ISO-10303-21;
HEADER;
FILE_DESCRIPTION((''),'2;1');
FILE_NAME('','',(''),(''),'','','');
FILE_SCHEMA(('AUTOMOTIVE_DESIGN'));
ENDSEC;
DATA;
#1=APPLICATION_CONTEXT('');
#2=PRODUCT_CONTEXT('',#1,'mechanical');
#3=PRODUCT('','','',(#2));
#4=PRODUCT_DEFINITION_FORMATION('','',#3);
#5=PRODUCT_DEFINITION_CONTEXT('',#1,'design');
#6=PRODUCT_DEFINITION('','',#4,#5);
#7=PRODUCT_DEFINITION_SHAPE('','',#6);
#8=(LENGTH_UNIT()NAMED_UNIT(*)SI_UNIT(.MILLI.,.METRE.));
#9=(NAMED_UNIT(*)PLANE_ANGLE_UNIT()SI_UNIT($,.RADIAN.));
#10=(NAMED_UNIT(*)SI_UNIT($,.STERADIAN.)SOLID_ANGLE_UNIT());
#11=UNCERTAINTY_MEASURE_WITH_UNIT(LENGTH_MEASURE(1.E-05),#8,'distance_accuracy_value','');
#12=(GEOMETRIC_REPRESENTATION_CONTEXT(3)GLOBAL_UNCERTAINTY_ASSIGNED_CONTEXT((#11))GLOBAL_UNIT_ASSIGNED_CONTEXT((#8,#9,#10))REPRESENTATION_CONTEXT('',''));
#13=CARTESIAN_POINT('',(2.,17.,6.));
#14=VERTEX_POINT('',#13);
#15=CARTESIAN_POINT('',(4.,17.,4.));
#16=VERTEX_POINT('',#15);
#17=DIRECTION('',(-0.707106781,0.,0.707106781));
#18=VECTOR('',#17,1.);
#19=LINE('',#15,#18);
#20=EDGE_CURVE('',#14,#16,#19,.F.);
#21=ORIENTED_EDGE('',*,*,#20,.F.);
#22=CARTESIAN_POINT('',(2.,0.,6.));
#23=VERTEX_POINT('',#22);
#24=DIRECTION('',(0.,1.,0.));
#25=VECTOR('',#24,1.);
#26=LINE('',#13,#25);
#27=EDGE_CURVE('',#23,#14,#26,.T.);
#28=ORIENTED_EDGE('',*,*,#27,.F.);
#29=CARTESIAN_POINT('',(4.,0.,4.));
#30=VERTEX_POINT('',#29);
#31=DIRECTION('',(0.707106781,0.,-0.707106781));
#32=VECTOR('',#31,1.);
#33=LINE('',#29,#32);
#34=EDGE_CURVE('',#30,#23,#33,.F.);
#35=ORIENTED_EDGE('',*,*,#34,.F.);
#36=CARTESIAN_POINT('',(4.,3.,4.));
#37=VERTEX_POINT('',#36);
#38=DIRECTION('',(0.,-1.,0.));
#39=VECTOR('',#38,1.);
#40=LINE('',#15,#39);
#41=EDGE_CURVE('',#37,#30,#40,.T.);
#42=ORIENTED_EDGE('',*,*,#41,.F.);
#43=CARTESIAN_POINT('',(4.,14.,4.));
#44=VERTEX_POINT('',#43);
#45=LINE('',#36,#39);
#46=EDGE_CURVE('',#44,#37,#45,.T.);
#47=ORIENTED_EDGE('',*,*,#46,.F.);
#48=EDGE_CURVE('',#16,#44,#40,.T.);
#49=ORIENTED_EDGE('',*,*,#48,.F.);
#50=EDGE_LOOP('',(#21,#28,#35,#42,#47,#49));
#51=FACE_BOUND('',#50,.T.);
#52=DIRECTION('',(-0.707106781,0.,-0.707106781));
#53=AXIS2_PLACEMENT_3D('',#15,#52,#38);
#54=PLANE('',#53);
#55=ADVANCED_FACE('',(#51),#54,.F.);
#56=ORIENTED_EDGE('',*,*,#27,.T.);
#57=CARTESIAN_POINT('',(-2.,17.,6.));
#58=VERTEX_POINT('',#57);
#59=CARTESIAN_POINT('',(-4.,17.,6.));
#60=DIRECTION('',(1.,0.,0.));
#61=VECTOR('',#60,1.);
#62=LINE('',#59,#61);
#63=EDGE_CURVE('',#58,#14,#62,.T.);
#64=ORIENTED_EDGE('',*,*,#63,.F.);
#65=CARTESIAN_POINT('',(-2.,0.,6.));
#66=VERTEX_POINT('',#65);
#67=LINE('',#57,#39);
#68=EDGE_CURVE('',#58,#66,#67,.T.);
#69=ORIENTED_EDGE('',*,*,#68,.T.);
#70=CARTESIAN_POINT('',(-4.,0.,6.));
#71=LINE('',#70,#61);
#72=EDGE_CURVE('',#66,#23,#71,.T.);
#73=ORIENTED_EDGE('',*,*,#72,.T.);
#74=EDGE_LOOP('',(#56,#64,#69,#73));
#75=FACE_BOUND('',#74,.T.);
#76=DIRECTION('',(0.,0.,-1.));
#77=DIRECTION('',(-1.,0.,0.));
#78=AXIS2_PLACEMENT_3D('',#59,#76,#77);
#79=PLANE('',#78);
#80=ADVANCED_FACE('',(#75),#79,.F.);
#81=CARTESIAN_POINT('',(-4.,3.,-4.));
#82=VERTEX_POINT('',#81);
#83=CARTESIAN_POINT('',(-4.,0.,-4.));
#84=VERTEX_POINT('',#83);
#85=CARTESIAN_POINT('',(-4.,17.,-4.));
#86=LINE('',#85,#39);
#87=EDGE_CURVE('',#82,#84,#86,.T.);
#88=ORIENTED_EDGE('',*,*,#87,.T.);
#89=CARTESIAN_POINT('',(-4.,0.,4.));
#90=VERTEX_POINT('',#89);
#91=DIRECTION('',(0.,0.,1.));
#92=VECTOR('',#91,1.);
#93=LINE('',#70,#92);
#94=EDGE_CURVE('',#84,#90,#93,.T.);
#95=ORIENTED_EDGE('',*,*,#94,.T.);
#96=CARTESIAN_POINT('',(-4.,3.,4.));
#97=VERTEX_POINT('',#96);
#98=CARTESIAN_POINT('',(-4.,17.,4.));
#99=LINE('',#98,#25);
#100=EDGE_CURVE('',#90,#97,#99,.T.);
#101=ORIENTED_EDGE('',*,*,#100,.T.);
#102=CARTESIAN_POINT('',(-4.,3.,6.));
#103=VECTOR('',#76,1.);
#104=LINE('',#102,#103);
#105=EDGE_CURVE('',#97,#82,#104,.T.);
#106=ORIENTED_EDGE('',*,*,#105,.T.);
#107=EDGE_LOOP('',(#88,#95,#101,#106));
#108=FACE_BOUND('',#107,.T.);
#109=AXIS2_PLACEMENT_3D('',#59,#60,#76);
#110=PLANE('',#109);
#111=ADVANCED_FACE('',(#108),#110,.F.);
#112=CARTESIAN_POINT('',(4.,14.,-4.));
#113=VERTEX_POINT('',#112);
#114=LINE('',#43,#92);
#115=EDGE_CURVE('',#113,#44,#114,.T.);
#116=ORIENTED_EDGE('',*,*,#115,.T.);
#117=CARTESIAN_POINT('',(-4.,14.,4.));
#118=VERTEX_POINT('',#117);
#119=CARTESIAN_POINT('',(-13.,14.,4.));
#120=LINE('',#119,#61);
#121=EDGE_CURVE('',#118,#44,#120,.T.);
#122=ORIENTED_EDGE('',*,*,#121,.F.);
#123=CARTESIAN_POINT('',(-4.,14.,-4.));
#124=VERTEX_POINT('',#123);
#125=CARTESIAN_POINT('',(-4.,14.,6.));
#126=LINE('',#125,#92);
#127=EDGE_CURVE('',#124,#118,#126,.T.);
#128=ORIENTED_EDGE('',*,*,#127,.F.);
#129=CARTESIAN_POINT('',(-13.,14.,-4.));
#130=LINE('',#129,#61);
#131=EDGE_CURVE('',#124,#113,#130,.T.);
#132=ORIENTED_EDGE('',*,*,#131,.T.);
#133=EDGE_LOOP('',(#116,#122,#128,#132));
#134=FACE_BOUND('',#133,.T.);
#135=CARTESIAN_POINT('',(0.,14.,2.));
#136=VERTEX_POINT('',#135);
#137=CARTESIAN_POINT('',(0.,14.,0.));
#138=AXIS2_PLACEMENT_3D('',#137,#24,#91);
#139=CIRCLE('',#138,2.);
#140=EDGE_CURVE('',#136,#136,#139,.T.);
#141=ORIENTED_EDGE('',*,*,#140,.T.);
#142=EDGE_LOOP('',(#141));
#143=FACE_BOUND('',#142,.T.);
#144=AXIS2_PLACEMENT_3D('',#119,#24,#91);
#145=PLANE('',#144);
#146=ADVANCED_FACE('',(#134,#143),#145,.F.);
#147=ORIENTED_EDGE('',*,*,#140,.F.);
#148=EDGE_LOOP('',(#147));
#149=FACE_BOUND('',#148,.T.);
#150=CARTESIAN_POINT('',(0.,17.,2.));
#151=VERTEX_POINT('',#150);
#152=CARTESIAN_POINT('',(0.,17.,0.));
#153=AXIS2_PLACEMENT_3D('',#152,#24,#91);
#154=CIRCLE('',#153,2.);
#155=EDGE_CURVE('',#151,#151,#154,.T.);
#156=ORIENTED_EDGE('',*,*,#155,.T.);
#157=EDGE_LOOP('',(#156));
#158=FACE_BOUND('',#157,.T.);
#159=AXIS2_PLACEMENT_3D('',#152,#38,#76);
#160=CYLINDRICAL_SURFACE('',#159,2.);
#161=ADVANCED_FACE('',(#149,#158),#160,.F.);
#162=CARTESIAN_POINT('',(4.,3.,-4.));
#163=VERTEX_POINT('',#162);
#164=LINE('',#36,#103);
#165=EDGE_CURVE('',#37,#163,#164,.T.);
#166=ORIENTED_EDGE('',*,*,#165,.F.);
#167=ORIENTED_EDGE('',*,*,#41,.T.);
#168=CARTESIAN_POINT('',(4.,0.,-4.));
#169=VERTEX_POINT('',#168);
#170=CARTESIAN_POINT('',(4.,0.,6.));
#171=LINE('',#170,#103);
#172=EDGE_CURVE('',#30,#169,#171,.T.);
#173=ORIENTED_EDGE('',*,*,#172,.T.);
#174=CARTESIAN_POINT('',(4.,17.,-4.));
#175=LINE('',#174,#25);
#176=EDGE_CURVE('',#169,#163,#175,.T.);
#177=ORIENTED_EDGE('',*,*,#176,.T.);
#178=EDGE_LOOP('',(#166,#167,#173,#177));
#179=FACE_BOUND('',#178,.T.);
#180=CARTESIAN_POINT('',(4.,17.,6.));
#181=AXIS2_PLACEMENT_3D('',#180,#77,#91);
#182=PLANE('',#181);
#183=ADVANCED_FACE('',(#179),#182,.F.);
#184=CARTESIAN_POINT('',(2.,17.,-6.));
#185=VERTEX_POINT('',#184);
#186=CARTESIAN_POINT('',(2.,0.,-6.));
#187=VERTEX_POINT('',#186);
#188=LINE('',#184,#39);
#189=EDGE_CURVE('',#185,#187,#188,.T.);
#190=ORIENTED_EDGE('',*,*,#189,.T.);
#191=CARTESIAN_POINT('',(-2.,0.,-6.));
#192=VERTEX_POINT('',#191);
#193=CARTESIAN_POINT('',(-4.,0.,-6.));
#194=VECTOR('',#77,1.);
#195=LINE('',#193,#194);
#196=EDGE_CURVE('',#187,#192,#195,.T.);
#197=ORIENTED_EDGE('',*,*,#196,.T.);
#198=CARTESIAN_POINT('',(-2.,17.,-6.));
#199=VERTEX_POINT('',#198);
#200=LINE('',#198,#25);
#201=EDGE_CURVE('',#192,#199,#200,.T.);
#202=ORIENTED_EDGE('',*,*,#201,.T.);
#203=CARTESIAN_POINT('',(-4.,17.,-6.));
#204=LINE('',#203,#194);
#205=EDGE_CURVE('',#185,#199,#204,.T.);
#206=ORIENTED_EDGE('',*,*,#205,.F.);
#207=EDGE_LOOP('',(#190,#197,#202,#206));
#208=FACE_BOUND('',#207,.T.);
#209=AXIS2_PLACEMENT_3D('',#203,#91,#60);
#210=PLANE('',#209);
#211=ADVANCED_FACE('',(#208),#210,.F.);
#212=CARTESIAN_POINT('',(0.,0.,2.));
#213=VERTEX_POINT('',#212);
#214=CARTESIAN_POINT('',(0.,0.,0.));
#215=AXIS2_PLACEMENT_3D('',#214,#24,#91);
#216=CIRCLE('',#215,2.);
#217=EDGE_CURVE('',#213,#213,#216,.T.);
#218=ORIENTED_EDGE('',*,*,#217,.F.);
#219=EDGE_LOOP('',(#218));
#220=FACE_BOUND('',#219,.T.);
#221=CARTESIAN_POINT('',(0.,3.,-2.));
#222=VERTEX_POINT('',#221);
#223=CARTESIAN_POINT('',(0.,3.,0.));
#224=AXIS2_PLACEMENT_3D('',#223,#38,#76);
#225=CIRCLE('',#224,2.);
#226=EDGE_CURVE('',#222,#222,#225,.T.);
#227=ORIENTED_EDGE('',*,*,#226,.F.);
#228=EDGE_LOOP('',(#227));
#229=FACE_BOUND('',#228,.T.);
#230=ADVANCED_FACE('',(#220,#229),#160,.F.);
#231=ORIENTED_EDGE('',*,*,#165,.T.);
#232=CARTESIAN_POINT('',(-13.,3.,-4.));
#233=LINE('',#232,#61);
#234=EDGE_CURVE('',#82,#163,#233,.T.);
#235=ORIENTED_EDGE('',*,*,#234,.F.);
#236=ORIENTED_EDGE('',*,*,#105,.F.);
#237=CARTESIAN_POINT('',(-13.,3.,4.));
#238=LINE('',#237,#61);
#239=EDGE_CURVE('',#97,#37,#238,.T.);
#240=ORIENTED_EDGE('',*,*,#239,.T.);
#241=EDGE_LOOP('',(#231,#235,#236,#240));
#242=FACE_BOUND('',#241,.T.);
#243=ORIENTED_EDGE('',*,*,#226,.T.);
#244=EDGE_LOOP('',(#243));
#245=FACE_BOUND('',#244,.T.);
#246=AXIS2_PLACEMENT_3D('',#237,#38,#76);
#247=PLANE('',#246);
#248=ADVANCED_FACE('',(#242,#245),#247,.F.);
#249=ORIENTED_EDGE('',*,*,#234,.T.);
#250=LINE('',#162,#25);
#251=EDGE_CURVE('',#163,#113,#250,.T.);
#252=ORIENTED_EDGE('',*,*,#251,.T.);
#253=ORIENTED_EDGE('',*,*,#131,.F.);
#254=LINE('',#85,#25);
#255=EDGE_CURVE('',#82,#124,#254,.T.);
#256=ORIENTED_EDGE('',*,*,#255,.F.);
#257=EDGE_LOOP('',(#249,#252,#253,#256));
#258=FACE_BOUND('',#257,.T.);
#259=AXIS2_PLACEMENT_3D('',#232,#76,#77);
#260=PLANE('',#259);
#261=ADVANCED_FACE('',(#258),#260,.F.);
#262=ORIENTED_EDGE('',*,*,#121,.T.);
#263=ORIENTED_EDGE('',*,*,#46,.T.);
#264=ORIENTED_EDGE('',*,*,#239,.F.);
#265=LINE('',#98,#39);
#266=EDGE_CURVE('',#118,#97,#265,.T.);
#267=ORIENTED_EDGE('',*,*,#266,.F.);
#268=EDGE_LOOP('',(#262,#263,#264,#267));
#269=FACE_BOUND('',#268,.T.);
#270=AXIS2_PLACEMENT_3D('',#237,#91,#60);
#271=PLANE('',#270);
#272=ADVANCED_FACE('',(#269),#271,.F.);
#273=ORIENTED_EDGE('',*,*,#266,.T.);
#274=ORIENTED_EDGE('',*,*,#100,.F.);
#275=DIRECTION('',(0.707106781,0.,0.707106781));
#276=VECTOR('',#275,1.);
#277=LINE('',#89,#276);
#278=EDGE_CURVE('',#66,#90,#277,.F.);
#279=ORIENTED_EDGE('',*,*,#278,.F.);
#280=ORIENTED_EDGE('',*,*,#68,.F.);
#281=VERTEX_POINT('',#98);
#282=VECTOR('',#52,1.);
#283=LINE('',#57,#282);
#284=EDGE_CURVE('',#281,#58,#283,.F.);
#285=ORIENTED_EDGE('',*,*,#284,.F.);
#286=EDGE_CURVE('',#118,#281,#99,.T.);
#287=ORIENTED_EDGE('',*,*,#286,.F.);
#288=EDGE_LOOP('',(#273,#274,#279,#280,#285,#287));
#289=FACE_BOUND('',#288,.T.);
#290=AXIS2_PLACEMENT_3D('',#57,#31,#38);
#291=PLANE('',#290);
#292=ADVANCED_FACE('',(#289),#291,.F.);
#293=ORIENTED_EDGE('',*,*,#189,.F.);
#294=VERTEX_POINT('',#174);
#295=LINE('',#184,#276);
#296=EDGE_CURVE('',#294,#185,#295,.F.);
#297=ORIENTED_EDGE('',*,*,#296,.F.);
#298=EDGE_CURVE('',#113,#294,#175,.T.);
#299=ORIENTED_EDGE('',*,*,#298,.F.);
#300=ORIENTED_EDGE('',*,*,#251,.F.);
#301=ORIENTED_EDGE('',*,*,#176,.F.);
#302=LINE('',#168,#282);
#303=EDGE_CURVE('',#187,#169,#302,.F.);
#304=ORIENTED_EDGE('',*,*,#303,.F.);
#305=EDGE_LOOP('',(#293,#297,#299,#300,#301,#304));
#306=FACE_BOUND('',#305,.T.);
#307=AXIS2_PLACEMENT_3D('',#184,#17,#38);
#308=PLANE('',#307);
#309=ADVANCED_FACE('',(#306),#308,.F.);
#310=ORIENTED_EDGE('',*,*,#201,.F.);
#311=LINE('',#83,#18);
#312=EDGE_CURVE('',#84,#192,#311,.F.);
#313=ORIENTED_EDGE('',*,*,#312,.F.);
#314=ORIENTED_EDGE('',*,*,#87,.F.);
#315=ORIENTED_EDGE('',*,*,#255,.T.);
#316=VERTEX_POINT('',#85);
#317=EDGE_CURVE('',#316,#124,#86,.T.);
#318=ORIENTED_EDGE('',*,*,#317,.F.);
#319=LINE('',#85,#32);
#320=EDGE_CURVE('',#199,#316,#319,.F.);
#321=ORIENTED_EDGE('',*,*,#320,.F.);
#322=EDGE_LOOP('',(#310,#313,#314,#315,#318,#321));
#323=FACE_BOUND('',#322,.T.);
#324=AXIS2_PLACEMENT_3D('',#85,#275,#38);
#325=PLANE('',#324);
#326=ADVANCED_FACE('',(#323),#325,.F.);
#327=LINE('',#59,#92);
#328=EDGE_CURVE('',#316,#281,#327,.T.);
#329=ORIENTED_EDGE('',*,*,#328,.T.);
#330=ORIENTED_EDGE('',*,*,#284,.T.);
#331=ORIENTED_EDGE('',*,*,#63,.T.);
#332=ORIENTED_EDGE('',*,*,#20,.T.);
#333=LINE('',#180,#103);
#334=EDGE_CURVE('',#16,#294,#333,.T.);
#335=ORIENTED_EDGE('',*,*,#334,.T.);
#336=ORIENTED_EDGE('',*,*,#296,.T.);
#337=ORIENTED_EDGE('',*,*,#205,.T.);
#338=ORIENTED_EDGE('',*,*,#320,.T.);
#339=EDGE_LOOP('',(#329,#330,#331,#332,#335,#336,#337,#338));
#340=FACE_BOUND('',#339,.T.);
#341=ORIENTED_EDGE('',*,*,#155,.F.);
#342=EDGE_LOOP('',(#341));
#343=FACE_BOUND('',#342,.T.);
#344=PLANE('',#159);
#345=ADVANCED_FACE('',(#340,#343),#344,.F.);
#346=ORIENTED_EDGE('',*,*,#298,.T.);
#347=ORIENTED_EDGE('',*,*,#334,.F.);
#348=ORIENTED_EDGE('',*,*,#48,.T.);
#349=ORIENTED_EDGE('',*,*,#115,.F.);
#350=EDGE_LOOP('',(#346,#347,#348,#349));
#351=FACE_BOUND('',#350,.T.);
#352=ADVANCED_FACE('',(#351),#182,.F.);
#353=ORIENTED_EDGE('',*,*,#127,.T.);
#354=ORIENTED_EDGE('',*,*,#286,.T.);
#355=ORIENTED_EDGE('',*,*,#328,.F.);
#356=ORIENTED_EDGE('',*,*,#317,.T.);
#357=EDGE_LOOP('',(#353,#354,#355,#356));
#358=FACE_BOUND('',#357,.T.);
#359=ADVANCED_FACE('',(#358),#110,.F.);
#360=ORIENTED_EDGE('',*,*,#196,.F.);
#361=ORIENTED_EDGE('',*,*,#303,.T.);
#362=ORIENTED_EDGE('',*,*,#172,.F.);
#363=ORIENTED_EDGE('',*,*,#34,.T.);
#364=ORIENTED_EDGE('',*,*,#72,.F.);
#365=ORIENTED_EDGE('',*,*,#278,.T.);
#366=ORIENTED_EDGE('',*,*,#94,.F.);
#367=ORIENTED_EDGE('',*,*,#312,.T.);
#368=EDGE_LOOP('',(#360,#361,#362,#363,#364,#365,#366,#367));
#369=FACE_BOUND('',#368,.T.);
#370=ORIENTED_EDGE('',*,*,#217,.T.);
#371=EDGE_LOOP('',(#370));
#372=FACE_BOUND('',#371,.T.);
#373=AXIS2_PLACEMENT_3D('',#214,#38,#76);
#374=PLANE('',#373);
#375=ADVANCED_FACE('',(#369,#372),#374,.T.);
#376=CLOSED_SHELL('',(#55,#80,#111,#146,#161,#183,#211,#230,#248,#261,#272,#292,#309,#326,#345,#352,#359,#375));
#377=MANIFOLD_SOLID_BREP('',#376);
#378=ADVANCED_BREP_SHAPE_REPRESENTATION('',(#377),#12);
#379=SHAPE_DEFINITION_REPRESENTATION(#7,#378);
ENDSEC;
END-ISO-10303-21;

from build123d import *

# Parameters (mm, degrees)
SKETCH1_W           = 8
SKETCH1_H           = 12
SKETCH1_R           = 2
BOSS_EXTRUDE1_DEPTH = 17
SKETCH2_W           = 8
SKETCH2_H           = 11
CUT_EXTRUDE1_DEPTH  = 17
CHAMFER1_SIZE       = 2


with BuildPart() as part:
    # Sketch1 → Boss-Extrude1 (new body)
    with BuildSketch(Plane(origin=(0, 0, 0), x_dir=(1, 0, 0), z_dir=(0, 1, 0))):
        Rectangle(SKETCH1_W, SKETCH1_H)
        with Locations(Location((0, 0, 0), (0, 0, 270))):
            Circle(SKETCH1_R, mode=Mode.SUBTRACT)
    extrude(amount=BOSS_EXTRUDE1_DEPTH)

    # Sketch2 → Cut-Extrude1 (cut)
    with BuildSketch(Plane(origin=(4, 0, 0), x_dir=(0, 0, -1), z_dir=(1, 0, 0))):
        with Locations((0, 8.5)):
            Rectangle(SKETCH2_W, SKETCH2_H)
    extrude(amount=-CUT_EXTRUDE1_DEPTH, mode=Mode.SUBTRACT)

    # Chamfer1
    chamfer1_edges = [part.edges().sort_by_distance(p)[0] for p in [
        (4, 8.5, 6),
        (-4, 8.5, 6),
        (-4, 8.5, -6),
        (4, 8.5, -6),
    ]]
    chamfer(chamfer1_edges, length=CHAMFER1_SIZE - 0.0001)  # a hair under: the kernel refuses the full size


solid = part.part
